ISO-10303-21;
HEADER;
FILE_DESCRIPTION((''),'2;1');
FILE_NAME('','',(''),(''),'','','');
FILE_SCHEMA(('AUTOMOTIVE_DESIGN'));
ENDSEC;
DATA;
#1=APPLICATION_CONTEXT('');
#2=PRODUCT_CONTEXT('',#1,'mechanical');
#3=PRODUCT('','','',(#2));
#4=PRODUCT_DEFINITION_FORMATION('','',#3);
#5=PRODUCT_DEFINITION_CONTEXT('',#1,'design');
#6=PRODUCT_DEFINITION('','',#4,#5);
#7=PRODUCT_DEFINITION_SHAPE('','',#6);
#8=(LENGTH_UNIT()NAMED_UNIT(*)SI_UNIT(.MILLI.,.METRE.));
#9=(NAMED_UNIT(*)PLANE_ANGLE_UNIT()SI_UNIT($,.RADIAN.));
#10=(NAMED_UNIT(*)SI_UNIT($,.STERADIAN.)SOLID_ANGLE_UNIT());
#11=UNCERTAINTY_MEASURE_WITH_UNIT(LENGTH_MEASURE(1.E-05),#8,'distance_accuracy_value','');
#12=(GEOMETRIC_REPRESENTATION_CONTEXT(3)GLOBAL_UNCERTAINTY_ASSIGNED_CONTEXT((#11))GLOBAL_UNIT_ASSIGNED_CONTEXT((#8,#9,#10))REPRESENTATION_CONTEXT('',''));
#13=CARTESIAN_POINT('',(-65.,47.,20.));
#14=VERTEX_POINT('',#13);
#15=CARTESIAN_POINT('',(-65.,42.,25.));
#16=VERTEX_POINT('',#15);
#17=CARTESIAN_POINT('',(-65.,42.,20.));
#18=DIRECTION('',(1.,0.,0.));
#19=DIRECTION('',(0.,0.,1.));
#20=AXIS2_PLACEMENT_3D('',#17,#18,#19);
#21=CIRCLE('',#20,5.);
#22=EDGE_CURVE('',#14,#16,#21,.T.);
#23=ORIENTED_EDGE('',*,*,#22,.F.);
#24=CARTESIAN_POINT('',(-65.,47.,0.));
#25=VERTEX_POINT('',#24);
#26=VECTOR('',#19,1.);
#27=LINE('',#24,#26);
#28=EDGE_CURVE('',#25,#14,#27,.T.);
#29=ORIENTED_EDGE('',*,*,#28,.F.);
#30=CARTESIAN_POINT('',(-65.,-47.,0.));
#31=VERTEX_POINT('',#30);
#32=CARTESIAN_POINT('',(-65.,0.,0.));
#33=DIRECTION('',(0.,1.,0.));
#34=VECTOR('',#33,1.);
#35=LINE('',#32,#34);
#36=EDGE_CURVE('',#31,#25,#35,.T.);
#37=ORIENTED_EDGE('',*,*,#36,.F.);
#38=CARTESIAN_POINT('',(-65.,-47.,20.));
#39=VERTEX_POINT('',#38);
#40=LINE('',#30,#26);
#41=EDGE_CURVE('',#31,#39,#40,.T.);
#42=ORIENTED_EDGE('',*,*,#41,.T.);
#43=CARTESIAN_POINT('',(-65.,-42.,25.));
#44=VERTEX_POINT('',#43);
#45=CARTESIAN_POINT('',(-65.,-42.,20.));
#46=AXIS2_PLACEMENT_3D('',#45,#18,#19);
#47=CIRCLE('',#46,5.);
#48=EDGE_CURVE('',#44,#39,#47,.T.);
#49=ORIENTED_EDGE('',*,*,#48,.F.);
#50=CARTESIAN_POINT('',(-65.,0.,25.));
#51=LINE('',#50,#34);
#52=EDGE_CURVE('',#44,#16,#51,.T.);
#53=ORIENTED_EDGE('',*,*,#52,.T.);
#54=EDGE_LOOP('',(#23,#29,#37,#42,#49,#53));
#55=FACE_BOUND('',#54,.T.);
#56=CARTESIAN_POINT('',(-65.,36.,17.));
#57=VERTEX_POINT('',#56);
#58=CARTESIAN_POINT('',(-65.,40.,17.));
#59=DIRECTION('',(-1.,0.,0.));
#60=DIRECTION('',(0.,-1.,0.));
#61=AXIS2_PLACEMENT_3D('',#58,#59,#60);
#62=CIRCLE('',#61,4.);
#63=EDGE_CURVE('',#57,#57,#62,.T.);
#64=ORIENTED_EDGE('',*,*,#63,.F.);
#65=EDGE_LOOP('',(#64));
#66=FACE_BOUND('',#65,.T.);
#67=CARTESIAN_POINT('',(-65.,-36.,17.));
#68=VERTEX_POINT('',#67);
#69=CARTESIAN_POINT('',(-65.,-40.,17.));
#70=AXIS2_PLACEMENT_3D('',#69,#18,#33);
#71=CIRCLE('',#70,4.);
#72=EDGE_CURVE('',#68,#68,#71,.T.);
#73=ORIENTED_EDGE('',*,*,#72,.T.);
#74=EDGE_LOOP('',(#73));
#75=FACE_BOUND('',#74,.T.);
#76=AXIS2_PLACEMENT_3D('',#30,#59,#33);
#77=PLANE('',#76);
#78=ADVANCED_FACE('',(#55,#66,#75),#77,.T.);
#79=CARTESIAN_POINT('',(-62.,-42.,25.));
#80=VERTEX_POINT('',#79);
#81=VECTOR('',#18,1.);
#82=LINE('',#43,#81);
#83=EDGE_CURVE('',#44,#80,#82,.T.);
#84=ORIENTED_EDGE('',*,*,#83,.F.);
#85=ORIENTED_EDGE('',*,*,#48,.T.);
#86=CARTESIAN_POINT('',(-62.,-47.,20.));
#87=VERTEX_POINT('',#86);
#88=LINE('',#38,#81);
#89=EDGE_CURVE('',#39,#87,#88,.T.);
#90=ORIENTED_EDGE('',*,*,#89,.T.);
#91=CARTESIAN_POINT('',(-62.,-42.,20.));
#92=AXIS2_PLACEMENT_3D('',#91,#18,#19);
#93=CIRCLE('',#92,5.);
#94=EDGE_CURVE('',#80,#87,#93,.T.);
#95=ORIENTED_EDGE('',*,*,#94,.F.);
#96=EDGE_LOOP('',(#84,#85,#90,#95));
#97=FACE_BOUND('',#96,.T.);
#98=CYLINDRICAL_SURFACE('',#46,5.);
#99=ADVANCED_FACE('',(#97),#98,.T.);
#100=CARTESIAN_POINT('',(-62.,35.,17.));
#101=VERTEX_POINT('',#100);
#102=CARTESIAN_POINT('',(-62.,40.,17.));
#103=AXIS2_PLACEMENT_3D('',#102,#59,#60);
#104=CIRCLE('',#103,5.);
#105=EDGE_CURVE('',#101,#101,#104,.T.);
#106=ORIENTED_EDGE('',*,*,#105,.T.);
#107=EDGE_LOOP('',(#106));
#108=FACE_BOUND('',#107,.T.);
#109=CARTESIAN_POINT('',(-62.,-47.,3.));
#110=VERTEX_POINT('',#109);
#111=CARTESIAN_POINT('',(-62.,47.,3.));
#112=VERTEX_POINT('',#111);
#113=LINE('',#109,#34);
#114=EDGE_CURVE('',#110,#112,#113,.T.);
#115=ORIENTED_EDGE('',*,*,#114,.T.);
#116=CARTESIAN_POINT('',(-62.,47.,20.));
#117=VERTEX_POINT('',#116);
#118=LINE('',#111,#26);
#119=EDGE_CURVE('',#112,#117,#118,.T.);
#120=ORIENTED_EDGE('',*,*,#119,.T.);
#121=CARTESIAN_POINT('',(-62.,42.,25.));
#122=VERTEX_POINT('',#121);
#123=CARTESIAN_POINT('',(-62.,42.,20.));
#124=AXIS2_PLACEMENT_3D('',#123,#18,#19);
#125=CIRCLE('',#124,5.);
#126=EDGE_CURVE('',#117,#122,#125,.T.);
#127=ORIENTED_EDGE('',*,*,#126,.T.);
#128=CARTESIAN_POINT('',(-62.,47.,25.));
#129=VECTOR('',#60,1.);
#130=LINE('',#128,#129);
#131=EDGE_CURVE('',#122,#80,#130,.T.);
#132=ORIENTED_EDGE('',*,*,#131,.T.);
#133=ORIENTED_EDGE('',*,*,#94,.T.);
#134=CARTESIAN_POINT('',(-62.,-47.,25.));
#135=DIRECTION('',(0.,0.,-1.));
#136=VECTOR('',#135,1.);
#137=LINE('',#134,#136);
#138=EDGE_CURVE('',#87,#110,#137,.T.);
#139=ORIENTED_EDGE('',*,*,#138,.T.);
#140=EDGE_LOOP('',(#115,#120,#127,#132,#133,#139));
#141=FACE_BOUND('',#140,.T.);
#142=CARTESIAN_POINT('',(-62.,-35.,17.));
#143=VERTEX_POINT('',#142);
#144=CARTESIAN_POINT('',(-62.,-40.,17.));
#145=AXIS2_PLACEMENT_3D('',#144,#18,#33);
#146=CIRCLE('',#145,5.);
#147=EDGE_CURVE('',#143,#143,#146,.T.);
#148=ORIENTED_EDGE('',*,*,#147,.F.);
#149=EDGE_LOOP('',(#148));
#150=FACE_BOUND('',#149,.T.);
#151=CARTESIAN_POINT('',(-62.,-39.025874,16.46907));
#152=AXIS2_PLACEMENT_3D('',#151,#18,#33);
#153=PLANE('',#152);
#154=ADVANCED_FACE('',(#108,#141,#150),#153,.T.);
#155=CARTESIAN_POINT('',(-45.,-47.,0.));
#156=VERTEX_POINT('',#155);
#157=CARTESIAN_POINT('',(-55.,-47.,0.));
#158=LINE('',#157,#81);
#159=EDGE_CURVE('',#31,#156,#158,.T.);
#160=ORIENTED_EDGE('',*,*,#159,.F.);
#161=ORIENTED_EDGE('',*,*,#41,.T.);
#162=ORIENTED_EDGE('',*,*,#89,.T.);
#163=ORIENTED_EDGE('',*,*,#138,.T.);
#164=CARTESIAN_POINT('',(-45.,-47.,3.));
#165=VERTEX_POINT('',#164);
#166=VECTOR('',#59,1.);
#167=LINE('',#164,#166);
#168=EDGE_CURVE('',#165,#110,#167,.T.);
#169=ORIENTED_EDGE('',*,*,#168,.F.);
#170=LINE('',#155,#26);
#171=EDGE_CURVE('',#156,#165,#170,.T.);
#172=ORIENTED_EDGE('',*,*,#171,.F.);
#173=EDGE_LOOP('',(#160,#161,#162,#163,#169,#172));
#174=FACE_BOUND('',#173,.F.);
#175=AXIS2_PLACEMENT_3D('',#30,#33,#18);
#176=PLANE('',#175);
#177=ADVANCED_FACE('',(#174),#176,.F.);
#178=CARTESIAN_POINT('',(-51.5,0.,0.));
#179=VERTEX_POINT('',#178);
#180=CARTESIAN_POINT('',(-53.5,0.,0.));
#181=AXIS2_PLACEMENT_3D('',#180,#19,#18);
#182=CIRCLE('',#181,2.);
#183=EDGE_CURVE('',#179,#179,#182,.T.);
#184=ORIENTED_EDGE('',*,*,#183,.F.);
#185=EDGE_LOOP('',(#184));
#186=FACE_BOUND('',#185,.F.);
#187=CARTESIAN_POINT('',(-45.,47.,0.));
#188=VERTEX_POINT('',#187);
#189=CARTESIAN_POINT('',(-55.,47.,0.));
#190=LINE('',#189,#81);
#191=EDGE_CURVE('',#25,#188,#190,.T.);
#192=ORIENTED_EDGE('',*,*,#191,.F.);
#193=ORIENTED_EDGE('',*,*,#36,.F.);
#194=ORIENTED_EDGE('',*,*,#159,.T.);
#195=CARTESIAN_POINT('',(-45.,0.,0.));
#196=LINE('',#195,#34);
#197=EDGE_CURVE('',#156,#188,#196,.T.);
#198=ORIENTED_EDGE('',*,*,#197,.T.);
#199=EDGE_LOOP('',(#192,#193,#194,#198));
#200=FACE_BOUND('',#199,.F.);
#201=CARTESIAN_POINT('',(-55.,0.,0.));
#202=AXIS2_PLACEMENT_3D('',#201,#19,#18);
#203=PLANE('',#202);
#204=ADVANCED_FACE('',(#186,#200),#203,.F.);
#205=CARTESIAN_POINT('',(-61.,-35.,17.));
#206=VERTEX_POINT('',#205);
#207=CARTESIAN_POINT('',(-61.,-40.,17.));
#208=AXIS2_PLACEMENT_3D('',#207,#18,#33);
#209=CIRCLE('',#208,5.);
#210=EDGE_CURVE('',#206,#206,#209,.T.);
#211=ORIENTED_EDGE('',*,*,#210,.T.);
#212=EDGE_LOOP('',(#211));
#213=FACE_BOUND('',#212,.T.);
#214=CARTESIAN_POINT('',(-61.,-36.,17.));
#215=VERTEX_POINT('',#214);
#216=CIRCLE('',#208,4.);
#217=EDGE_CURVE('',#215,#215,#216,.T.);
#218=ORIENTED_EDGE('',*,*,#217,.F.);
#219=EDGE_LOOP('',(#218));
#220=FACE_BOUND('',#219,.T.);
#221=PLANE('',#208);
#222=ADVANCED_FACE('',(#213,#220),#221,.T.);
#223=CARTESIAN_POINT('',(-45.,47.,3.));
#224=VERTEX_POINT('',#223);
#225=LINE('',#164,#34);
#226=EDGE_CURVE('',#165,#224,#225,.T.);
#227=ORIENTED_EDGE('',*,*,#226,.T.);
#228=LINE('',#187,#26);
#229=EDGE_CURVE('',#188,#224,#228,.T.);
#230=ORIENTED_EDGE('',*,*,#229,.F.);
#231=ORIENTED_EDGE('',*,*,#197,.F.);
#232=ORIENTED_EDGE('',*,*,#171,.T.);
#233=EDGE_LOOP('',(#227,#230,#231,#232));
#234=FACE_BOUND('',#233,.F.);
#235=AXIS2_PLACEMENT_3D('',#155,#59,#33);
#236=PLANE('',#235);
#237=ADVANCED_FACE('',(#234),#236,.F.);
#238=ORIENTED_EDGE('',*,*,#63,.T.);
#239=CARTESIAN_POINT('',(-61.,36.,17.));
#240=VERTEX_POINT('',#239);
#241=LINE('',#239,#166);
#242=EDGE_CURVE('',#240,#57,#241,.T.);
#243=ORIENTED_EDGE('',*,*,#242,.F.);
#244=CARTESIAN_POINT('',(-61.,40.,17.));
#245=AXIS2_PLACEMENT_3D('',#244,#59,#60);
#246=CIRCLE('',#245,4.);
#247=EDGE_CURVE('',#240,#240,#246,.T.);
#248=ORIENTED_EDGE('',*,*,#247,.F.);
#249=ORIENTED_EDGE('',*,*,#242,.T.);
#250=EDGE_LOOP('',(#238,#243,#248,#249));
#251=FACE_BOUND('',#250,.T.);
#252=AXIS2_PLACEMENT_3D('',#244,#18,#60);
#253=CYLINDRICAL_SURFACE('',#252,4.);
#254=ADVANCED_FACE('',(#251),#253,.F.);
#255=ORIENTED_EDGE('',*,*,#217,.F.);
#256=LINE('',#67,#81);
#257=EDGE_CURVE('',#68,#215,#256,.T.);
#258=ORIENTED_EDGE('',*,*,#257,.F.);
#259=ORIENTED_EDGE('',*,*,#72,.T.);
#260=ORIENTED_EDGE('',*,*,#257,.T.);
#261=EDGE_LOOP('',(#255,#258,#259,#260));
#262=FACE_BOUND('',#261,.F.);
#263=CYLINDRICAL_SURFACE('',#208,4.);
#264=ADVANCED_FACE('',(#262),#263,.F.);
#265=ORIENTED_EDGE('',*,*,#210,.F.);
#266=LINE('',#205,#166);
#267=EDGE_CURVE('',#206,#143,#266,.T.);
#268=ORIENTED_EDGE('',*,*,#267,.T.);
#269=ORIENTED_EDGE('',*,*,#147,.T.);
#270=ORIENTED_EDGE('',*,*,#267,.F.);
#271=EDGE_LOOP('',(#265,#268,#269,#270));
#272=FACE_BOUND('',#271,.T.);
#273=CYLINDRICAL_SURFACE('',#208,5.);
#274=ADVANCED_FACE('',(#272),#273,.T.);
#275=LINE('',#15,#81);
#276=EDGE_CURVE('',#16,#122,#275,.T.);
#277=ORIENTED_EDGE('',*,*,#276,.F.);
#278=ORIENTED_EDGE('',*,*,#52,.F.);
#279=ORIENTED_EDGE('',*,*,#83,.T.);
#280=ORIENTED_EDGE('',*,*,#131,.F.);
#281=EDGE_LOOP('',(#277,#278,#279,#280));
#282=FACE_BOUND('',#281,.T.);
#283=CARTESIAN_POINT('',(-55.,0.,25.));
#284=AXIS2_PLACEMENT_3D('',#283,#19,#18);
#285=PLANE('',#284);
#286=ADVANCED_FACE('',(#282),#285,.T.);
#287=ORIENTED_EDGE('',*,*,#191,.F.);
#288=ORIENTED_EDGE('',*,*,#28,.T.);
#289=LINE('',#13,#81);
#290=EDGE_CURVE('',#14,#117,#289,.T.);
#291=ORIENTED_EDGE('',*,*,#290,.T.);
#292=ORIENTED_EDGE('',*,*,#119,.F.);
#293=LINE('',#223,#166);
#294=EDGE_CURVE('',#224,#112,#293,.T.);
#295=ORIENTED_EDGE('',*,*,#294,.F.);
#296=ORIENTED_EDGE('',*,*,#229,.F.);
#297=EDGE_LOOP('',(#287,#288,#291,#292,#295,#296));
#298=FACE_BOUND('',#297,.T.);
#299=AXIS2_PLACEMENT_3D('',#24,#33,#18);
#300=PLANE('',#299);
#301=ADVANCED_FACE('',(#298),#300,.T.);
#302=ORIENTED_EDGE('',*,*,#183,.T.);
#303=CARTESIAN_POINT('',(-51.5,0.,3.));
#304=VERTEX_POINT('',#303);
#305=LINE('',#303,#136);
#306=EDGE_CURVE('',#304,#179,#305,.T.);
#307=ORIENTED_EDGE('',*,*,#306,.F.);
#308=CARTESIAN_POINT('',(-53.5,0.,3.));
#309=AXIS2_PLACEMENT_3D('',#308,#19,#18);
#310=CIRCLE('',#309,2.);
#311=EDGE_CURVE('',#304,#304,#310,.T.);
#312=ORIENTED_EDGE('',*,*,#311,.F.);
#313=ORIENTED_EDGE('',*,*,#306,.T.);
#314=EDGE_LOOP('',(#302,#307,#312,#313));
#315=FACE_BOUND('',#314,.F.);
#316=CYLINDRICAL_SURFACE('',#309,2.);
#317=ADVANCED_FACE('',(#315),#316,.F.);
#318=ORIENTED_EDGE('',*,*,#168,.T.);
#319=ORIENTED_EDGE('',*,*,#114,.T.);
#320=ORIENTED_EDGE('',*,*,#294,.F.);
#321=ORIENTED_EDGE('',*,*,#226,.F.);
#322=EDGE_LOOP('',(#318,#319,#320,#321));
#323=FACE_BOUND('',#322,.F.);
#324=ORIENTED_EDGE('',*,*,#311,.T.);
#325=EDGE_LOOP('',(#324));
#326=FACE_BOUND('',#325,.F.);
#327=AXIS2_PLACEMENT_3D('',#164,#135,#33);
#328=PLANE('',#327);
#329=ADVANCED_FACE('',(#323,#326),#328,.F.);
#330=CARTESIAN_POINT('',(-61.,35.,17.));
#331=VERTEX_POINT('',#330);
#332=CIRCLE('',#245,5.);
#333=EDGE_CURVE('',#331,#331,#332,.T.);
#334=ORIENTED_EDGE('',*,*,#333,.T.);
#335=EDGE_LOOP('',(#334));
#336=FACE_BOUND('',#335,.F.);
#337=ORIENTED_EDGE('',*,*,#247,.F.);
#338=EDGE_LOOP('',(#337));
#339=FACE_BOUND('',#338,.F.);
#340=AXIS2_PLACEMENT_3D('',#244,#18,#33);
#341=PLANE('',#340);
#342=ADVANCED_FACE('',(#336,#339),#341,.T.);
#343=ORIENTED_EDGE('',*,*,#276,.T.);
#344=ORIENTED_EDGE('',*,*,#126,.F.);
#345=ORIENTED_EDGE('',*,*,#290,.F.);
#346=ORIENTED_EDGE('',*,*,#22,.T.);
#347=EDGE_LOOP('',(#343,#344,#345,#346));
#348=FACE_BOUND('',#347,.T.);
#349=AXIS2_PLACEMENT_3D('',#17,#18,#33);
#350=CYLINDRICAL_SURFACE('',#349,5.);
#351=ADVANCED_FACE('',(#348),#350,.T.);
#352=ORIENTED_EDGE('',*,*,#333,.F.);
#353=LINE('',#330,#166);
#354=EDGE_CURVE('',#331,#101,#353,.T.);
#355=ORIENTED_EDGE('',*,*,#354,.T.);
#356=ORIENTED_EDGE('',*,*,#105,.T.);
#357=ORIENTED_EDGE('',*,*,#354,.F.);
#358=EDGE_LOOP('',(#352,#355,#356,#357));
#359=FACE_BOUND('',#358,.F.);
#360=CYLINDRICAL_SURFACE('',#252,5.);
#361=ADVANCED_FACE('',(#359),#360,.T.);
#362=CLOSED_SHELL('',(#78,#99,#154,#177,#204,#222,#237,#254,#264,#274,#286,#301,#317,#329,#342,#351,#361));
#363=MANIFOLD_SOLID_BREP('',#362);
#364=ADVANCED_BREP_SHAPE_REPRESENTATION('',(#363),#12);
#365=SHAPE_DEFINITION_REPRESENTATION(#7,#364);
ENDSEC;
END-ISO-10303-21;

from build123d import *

# Parameters (mm, degrees)
F0_W     = 20
F0_H     = 94
F1_DEPTH = 25
F2_R     = 5
F2_R_2   = 4
F3_DEPTH = 17
F4_DEPTH = 20
F5_START = -16
F5_DEPTH = 1
F6_R     = 5
F7_R     = 2
F8_DEPTH = 3


# Not quite as in the source:
# - a pattern or mirror of a feature is missing from the dataset's text; its kind, count and spacing are read off the source's solid


with BuildPart() as f1:
    # F0 (on Top) → F1 (new body)
    with BuildSketch(Plane.XY):
        with Locations((-55, 0)):
            Rectangle(F0_W, F0_H)
    extrude(amount=F1_DEPTH)

    # F2 (on face) → F3 (cut)
    with BuildSketch(Plane.YZ.offset(-45)):
        with BuildLine():
            Line((-32.4501655647, 25), (-47, 25))
            Line((-47, 25), (-47, 8.5147186258))
            ThreePointArc((-47, 8.5147186258), (-35.3095842402, 7.0501256289), (-29, 17))
            ThreePointArc((-29, 17), (-29.8993025293, 21.3561348241), (-32.4501655647, 25))
        make_face()
        with Locations((-40, 17)):
            Circle(F2_R, mode=Mode.SUBTRACT)
        with BuildLine():
            Line((-29.753049234, 25), (-32.4501655647, 25))
            ThreePointArc((-32.4501655647, 25), (-29.8993025293, 21.3561348241), (-29, 17))
            ThreePointArc((-29, 17), (-35.3095842402, 7.0501256289), (-47, 8.5147186258))
            Line((-47, 8.5147186258), (-47, 6.0455488499))
            ThreePointArc((-47, 6.0455488499), (-33.7550020016, 5.598245749), (-27, 17))
            ThreePointArc((-27, 17), (-27.7075153049, 21.2302269468), (-29.753049234, 25))
        make_face()
        with BuildLine():
            Line((47, 25), (-29.753049234, 25))
            ThreePointArc((-29.753049234, 25), (-27.7075153049, 21.2302269468), (-27, 17))
            ThreePointArc((-27, 17), (-33.7550020016, 5.598245749), (-47, 6.0455488499))
            Line((-47, 6.0455488499), (-47, 3))
            Line((-47, 3), (47, 3))
            Line((47, 3), (47, 25))
        make_face()
        with Locations((-40, 17)):
            Circle(F2_R)
        with Locations((-40, 17)):
            Circle(F2_R_2, mode=Mode.SUBTRACT)
    extrude(amount=-F3_DEPTH, mode=Mode.SUBTRACT)

    # F2 (on face) → F4 (cut, through all)
    with BuildSketch(Plane.YZ.offset(-45)):
        with Locations((-40, 17)):
            Circle(F2_R_2)
    f4 = extrude(amount=-F4_DEPTH, mode=Mode.SUBTRACT)

    # F4_copies: F4 across plane
    add(f4.mirror(Plane.ZX), mode=Mode.SUBTRACT)

    # F2 (on face) → F5 (join)
    with BuildSketch(Plane.YZ.offset(-45).offset(F5_START)):
        with Locations((-40, 17)):
            Circle(F2_R)
        with Locations((-40, 17)):
            Circle(F2_R_2, mode=Mode.SUBTRACT)
    f5 = extrude(amount=-F5_DEPTH)

    # F5_copies: F5 across plane
    add(f5.mirror(Plane.ZX))

    # F6
    f6_edges = [f1.edges().sort_by_distance(p)[0] for p in [
        (-63.5, -47, 25),
        (-63.5, 47, 25),
    ]]
    fillet(f6_edges, radius=F6_R)

    # F7 (on face) → F8 (cut, through all)
    with BuildSketch(Plane.XY.offset(3)):
        with Locations((-53.5, 0)):
            Circle(F7_R)
    extrude(amount=-F8_DEPTH, mode=Mode.SUBTRACT)


solid = f1.part
